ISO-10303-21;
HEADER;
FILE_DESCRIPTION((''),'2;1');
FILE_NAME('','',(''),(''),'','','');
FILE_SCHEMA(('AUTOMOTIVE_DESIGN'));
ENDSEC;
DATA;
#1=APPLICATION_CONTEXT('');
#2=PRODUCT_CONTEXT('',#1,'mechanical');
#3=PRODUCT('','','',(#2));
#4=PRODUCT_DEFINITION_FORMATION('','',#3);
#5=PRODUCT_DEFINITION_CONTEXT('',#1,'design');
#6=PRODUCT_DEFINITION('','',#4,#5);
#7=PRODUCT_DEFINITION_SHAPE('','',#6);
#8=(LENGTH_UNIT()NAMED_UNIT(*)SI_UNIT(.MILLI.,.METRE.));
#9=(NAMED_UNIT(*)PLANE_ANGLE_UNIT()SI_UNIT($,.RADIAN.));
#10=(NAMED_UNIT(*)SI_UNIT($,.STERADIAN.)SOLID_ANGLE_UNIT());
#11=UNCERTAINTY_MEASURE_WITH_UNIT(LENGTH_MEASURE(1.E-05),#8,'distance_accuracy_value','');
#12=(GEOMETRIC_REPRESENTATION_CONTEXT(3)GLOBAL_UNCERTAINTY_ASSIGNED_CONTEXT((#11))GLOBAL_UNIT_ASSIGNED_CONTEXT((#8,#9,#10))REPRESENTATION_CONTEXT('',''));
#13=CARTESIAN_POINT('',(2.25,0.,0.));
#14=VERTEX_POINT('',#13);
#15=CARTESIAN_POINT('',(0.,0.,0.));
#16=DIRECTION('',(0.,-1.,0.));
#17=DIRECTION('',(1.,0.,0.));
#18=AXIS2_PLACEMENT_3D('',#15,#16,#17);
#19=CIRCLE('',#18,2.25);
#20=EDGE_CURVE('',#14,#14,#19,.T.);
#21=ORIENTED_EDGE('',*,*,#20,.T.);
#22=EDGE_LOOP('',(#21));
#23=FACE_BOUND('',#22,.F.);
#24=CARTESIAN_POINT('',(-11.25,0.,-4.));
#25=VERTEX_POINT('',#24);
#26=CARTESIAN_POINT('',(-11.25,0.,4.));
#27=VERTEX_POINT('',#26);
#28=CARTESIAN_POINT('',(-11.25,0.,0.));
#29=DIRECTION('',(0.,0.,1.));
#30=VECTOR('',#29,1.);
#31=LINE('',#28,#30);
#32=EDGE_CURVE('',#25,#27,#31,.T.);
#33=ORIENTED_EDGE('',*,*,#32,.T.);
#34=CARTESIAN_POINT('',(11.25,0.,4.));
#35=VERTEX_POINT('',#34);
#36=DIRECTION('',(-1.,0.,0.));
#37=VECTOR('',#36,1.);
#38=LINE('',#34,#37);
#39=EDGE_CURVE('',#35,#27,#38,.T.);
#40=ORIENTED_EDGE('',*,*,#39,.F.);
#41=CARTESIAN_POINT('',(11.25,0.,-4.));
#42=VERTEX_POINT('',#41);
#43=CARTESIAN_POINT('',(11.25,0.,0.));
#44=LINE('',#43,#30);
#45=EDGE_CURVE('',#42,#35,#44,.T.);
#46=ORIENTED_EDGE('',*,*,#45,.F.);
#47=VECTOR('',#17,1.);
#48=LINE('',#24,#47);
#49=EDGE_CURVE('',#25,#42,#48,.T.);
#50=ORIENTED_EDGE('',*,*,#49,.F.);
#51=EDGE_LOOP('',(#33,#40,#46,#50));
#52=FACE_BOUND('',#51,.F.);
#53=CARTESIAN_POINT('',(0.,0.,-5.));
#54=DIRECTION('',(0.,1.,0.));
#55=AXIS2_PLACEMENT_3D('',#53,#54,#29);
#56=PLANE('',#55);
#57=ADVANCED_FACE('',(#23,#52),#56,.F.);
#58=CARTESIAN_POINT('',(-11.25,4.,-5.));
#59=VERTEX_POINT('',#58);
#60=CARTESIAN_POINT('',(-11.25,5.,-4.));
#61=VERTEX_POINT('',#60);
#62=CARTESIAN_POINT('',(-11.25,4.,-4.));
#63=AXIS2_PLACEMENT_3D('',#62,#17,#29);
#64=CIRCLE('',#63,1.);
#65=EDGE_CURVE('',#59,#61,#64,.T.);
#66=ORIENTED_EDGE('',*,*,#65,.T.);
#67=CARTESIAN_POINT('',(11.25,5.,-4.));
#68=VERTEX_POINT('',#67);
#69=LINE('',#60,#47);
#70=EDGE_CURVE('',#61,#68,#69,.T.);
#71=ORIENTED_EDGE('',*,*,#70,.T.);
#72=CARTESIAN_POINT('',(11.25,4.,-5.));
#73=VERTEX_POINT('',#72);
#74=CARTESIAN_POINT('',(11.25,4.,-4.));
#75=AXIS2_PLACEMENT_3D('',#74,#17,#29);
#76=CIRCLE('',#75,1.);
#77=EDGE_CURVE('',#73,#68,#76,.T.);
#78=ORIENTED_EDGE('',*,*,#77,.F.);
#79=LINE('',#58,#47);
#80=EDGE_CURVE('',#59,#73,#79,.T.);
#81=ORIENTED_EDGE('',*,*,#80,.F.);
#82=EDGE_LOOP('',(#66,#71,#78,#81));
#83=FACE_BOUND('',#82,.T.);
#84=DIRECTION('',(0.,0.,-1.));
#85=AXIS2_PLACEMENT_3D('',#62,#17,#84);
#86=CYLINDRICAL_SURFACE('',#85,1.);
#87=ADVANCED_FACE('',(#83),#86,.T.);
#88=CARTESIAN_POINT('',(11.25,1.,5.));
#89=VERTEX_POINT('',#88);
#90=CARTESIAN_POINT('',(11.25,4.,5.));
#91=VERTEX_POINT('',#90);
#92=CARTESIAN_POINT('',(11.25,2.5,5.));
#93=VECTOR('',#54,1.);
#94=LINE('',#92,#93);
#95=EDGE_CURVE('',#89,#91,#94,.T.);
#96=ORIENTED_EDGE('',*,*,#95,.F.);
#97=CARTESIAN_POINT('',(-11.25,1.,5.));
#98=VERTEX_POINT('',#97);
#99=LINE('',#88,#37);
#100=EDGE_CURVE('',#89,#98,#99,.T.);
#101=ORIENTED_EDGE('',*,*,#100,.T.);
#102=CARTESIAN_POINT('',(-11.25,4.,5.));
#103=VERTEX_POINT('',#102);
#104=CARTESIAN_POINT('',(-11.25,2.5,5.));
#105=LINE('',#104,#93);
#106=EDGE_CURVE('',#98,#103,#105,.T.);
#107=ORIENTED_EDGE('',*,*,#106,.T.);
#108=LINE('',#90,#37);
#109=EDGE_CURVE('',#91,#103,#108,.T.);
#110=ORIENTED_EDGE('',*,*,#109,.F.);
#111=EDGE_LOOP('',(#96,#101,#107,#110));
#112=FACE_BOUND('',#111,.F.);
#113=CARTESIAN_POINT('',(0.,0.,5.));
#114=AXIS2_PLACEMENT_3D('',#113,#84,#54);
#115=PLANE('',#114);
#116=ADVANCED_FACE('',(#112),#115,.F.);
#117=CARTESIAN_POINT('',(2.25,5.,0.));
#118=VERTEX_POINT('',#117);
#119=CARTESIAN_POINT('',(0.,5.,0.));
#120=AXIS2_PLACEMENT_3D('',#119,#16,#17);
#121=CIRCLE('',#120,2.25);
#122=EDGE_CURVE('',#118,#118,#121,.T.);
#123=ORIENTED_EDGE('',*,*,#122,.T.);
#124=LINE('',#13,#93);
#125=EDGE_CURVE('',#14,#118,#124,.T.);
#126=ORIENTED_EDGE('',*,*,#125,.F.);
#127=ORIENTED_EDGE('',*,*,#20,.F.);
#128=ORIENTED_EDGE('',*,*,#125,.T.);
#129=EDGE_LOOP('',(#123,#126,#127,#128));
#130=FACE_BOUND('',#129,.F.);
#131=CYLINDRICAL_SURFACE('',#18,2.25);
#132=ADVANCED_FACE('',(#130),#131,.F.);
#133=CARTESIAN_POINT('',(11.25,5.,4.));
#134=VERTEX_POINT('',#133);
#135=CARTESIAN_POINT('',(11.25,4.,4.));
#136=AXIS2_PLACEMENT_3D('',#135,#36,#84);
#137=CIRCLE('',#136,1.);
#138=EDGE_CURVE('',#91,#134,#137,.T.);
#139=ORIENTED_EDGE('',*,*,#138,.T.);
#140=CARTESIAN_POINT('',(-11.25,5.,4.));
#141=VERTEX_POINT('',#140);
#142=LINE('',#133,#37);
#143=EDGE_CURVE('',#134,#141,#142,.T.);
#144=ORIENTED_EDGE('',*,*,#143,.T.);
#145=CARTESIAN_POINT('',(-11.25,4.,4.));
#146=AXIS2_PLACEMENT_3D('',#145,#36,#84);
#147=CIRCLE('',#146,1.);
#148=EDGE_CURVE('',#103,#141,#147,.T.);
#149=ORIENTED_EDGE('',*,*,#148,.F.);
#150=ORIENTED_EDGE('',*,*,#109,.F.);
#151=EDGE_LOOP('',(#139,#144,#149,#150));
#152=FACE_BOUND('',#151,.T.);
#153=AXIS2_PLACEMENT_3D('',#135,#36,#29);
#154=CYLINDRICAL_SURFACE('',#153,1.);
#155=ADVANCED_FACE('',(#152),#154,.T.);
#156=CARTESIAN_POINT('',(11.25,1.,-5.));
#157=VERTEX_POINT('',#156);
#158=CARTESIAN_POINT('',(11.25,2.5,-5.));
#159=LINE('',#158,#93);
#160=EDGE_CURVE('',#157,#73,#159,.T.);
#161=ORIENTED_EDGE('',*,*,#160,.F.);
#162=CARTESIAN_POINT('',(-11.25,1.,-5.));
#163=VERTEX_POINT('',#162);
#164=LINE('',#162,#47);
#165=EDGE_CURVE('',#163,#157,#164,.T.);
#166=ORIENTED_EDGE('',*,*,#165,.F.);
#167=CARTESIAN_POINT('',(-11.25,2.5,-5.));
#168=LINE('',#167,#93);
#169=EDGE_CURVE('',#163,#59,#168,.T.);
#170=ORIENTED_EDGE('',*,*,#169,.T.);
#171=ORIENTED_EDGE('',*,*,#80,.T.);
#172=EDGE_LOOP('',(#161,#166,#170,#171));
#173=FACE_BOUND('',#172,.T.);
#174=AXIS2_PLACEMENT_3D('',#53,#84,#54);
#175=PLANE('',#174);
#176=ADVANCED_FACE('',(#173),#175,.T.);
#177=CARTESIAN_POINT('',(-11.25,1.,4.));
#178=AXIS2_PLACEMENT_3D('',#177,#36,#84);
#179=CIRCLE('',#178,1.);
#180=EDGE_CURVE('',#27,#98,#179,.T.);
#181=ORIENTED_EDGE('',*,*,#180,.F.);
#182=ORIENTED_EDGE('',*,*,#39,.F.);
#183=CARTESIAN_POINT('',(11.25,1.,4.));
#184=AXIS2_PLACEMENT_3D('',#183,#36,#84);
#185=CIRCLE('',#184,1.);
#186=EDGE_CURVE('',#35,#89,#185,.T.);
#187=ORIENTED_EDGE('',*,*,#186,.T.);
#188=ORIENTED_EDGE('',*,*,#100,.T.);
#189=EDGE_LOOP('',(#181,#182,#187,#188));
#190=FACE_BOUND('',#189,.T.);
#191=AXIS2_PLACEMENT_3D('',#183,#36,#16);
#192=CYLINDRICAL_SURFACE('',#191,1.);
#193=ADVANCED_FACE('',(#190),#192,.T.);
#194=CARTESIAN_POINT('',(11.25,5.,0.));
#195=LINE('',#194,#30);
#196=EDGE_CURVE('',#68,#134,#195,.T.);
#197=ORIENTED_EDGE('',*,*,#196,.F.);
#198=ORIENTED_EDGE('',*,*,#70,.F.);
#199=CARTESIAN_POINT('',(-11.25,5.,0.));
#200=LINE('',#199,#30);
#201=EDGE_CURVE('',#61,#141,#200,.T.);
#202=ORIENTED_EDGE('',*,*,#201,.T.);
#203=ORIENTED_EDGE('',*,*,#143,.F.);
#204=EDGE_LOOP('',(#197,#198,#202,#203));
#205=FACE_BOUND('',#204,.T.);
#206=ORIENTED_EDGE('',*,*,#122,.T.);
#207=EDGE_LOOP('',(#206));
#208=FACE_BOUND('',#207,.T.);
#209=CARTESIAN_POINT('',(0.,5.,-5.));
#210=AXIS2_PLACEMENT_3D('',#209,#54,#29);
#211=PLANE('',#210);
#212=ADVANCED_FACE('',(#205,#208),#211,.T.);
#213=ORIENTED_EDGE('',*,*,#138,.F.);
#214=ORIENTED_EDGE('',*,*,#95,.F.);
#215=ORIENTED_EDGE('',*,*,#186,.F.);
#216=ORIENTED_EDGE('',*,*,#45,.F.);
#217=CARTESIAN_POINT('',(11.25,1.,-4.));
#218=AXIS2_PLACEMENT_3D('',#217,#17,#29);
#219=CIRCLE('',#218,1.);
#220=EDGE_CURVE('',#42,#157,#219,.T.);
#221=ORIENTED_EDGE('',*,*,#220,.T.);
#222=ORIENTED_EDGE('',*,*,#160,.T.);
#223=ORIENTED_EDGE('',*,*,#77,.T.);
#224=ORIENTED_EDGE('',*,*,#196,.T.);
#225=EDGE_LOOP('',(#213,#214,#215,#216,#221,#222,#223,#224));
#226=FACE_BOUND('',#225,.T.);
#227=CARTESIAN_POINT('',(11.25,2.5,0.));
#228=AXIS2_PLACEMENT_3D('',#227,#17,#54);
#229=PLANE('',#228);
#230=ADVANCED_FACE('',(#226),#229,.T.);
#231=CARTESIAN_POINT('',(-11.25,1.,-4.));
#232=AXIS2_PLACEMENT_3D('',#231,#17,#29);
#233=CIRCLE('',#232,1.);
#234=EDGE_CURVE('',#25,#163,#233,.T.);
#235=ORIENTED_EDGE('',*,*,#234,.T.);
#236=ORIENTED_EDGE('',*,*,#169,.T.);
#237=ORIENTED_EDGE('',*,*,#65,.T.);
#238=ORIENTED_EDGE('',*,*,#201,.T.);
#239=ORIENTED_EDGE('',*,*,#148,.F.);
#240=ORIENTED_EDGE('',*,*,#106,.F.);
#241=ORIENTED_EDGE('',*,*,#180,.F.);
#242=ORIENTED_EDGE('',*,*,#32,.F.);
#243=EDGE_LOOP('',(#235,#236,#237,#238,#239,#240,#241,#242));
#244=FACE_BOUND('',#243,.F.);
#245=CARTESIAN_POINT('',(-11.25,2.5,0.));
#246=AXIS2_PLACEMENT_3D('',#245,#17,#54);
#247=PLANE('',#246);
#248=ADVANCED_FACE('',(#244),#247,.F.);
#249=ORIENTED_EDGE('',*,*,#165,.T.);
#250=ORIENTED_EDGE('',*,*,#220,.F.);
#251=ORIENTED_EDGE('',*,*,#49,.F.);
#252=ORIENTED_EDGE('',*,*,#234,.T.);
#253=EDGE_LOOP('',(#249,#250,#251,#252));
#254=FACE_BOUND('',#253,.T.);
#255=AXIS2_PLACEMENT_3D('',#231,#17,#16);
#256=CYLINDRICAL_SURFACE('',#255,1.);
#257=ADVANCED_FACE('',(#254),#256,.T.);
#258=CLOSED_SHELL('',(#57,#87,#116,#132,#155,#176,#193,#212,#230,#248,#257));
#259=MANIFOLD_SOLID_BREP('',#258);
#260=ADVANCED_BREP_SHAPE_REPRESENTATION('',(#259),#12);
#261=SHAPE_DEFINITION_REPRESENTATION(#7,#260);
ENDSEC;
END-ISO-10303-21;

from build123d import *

# Parameters (mm, degrees)
F0_W     = 5
F0_H     = 10
F1_DEPTH = 11.25
F2_R     = 2.25
F3_DEPTH = 5.001
F4_R     = 1


with BuildPart() as f1:
    # F0 (on Right) → F1 (new body, symmetric)
    with BuildSketch(Plane.YZ):
        with Locations((2.5, 0)):
            Rectangle(F0_W, F0_H)
    extrude(amount=F1_DEPTH, both=True)

    # F2 (on face) → F3 (cut, through all)
    with BuildSketch(Plane.XZ):
        Circle(F2_R)
    extrude(amount=-F3_DEPTH, mode=Mode.SUBTRACT)

    # F4
    f4_edges = [f1.edges().sort_by_distance(p)[0] for p in [
        (0, 0, 5),
        (0, 0, -5),
        (0, 5, 5),
        (0, 5, -5),
    ]]
    fillet(f4_edges, radius=F4_R)


solid = f1.part
